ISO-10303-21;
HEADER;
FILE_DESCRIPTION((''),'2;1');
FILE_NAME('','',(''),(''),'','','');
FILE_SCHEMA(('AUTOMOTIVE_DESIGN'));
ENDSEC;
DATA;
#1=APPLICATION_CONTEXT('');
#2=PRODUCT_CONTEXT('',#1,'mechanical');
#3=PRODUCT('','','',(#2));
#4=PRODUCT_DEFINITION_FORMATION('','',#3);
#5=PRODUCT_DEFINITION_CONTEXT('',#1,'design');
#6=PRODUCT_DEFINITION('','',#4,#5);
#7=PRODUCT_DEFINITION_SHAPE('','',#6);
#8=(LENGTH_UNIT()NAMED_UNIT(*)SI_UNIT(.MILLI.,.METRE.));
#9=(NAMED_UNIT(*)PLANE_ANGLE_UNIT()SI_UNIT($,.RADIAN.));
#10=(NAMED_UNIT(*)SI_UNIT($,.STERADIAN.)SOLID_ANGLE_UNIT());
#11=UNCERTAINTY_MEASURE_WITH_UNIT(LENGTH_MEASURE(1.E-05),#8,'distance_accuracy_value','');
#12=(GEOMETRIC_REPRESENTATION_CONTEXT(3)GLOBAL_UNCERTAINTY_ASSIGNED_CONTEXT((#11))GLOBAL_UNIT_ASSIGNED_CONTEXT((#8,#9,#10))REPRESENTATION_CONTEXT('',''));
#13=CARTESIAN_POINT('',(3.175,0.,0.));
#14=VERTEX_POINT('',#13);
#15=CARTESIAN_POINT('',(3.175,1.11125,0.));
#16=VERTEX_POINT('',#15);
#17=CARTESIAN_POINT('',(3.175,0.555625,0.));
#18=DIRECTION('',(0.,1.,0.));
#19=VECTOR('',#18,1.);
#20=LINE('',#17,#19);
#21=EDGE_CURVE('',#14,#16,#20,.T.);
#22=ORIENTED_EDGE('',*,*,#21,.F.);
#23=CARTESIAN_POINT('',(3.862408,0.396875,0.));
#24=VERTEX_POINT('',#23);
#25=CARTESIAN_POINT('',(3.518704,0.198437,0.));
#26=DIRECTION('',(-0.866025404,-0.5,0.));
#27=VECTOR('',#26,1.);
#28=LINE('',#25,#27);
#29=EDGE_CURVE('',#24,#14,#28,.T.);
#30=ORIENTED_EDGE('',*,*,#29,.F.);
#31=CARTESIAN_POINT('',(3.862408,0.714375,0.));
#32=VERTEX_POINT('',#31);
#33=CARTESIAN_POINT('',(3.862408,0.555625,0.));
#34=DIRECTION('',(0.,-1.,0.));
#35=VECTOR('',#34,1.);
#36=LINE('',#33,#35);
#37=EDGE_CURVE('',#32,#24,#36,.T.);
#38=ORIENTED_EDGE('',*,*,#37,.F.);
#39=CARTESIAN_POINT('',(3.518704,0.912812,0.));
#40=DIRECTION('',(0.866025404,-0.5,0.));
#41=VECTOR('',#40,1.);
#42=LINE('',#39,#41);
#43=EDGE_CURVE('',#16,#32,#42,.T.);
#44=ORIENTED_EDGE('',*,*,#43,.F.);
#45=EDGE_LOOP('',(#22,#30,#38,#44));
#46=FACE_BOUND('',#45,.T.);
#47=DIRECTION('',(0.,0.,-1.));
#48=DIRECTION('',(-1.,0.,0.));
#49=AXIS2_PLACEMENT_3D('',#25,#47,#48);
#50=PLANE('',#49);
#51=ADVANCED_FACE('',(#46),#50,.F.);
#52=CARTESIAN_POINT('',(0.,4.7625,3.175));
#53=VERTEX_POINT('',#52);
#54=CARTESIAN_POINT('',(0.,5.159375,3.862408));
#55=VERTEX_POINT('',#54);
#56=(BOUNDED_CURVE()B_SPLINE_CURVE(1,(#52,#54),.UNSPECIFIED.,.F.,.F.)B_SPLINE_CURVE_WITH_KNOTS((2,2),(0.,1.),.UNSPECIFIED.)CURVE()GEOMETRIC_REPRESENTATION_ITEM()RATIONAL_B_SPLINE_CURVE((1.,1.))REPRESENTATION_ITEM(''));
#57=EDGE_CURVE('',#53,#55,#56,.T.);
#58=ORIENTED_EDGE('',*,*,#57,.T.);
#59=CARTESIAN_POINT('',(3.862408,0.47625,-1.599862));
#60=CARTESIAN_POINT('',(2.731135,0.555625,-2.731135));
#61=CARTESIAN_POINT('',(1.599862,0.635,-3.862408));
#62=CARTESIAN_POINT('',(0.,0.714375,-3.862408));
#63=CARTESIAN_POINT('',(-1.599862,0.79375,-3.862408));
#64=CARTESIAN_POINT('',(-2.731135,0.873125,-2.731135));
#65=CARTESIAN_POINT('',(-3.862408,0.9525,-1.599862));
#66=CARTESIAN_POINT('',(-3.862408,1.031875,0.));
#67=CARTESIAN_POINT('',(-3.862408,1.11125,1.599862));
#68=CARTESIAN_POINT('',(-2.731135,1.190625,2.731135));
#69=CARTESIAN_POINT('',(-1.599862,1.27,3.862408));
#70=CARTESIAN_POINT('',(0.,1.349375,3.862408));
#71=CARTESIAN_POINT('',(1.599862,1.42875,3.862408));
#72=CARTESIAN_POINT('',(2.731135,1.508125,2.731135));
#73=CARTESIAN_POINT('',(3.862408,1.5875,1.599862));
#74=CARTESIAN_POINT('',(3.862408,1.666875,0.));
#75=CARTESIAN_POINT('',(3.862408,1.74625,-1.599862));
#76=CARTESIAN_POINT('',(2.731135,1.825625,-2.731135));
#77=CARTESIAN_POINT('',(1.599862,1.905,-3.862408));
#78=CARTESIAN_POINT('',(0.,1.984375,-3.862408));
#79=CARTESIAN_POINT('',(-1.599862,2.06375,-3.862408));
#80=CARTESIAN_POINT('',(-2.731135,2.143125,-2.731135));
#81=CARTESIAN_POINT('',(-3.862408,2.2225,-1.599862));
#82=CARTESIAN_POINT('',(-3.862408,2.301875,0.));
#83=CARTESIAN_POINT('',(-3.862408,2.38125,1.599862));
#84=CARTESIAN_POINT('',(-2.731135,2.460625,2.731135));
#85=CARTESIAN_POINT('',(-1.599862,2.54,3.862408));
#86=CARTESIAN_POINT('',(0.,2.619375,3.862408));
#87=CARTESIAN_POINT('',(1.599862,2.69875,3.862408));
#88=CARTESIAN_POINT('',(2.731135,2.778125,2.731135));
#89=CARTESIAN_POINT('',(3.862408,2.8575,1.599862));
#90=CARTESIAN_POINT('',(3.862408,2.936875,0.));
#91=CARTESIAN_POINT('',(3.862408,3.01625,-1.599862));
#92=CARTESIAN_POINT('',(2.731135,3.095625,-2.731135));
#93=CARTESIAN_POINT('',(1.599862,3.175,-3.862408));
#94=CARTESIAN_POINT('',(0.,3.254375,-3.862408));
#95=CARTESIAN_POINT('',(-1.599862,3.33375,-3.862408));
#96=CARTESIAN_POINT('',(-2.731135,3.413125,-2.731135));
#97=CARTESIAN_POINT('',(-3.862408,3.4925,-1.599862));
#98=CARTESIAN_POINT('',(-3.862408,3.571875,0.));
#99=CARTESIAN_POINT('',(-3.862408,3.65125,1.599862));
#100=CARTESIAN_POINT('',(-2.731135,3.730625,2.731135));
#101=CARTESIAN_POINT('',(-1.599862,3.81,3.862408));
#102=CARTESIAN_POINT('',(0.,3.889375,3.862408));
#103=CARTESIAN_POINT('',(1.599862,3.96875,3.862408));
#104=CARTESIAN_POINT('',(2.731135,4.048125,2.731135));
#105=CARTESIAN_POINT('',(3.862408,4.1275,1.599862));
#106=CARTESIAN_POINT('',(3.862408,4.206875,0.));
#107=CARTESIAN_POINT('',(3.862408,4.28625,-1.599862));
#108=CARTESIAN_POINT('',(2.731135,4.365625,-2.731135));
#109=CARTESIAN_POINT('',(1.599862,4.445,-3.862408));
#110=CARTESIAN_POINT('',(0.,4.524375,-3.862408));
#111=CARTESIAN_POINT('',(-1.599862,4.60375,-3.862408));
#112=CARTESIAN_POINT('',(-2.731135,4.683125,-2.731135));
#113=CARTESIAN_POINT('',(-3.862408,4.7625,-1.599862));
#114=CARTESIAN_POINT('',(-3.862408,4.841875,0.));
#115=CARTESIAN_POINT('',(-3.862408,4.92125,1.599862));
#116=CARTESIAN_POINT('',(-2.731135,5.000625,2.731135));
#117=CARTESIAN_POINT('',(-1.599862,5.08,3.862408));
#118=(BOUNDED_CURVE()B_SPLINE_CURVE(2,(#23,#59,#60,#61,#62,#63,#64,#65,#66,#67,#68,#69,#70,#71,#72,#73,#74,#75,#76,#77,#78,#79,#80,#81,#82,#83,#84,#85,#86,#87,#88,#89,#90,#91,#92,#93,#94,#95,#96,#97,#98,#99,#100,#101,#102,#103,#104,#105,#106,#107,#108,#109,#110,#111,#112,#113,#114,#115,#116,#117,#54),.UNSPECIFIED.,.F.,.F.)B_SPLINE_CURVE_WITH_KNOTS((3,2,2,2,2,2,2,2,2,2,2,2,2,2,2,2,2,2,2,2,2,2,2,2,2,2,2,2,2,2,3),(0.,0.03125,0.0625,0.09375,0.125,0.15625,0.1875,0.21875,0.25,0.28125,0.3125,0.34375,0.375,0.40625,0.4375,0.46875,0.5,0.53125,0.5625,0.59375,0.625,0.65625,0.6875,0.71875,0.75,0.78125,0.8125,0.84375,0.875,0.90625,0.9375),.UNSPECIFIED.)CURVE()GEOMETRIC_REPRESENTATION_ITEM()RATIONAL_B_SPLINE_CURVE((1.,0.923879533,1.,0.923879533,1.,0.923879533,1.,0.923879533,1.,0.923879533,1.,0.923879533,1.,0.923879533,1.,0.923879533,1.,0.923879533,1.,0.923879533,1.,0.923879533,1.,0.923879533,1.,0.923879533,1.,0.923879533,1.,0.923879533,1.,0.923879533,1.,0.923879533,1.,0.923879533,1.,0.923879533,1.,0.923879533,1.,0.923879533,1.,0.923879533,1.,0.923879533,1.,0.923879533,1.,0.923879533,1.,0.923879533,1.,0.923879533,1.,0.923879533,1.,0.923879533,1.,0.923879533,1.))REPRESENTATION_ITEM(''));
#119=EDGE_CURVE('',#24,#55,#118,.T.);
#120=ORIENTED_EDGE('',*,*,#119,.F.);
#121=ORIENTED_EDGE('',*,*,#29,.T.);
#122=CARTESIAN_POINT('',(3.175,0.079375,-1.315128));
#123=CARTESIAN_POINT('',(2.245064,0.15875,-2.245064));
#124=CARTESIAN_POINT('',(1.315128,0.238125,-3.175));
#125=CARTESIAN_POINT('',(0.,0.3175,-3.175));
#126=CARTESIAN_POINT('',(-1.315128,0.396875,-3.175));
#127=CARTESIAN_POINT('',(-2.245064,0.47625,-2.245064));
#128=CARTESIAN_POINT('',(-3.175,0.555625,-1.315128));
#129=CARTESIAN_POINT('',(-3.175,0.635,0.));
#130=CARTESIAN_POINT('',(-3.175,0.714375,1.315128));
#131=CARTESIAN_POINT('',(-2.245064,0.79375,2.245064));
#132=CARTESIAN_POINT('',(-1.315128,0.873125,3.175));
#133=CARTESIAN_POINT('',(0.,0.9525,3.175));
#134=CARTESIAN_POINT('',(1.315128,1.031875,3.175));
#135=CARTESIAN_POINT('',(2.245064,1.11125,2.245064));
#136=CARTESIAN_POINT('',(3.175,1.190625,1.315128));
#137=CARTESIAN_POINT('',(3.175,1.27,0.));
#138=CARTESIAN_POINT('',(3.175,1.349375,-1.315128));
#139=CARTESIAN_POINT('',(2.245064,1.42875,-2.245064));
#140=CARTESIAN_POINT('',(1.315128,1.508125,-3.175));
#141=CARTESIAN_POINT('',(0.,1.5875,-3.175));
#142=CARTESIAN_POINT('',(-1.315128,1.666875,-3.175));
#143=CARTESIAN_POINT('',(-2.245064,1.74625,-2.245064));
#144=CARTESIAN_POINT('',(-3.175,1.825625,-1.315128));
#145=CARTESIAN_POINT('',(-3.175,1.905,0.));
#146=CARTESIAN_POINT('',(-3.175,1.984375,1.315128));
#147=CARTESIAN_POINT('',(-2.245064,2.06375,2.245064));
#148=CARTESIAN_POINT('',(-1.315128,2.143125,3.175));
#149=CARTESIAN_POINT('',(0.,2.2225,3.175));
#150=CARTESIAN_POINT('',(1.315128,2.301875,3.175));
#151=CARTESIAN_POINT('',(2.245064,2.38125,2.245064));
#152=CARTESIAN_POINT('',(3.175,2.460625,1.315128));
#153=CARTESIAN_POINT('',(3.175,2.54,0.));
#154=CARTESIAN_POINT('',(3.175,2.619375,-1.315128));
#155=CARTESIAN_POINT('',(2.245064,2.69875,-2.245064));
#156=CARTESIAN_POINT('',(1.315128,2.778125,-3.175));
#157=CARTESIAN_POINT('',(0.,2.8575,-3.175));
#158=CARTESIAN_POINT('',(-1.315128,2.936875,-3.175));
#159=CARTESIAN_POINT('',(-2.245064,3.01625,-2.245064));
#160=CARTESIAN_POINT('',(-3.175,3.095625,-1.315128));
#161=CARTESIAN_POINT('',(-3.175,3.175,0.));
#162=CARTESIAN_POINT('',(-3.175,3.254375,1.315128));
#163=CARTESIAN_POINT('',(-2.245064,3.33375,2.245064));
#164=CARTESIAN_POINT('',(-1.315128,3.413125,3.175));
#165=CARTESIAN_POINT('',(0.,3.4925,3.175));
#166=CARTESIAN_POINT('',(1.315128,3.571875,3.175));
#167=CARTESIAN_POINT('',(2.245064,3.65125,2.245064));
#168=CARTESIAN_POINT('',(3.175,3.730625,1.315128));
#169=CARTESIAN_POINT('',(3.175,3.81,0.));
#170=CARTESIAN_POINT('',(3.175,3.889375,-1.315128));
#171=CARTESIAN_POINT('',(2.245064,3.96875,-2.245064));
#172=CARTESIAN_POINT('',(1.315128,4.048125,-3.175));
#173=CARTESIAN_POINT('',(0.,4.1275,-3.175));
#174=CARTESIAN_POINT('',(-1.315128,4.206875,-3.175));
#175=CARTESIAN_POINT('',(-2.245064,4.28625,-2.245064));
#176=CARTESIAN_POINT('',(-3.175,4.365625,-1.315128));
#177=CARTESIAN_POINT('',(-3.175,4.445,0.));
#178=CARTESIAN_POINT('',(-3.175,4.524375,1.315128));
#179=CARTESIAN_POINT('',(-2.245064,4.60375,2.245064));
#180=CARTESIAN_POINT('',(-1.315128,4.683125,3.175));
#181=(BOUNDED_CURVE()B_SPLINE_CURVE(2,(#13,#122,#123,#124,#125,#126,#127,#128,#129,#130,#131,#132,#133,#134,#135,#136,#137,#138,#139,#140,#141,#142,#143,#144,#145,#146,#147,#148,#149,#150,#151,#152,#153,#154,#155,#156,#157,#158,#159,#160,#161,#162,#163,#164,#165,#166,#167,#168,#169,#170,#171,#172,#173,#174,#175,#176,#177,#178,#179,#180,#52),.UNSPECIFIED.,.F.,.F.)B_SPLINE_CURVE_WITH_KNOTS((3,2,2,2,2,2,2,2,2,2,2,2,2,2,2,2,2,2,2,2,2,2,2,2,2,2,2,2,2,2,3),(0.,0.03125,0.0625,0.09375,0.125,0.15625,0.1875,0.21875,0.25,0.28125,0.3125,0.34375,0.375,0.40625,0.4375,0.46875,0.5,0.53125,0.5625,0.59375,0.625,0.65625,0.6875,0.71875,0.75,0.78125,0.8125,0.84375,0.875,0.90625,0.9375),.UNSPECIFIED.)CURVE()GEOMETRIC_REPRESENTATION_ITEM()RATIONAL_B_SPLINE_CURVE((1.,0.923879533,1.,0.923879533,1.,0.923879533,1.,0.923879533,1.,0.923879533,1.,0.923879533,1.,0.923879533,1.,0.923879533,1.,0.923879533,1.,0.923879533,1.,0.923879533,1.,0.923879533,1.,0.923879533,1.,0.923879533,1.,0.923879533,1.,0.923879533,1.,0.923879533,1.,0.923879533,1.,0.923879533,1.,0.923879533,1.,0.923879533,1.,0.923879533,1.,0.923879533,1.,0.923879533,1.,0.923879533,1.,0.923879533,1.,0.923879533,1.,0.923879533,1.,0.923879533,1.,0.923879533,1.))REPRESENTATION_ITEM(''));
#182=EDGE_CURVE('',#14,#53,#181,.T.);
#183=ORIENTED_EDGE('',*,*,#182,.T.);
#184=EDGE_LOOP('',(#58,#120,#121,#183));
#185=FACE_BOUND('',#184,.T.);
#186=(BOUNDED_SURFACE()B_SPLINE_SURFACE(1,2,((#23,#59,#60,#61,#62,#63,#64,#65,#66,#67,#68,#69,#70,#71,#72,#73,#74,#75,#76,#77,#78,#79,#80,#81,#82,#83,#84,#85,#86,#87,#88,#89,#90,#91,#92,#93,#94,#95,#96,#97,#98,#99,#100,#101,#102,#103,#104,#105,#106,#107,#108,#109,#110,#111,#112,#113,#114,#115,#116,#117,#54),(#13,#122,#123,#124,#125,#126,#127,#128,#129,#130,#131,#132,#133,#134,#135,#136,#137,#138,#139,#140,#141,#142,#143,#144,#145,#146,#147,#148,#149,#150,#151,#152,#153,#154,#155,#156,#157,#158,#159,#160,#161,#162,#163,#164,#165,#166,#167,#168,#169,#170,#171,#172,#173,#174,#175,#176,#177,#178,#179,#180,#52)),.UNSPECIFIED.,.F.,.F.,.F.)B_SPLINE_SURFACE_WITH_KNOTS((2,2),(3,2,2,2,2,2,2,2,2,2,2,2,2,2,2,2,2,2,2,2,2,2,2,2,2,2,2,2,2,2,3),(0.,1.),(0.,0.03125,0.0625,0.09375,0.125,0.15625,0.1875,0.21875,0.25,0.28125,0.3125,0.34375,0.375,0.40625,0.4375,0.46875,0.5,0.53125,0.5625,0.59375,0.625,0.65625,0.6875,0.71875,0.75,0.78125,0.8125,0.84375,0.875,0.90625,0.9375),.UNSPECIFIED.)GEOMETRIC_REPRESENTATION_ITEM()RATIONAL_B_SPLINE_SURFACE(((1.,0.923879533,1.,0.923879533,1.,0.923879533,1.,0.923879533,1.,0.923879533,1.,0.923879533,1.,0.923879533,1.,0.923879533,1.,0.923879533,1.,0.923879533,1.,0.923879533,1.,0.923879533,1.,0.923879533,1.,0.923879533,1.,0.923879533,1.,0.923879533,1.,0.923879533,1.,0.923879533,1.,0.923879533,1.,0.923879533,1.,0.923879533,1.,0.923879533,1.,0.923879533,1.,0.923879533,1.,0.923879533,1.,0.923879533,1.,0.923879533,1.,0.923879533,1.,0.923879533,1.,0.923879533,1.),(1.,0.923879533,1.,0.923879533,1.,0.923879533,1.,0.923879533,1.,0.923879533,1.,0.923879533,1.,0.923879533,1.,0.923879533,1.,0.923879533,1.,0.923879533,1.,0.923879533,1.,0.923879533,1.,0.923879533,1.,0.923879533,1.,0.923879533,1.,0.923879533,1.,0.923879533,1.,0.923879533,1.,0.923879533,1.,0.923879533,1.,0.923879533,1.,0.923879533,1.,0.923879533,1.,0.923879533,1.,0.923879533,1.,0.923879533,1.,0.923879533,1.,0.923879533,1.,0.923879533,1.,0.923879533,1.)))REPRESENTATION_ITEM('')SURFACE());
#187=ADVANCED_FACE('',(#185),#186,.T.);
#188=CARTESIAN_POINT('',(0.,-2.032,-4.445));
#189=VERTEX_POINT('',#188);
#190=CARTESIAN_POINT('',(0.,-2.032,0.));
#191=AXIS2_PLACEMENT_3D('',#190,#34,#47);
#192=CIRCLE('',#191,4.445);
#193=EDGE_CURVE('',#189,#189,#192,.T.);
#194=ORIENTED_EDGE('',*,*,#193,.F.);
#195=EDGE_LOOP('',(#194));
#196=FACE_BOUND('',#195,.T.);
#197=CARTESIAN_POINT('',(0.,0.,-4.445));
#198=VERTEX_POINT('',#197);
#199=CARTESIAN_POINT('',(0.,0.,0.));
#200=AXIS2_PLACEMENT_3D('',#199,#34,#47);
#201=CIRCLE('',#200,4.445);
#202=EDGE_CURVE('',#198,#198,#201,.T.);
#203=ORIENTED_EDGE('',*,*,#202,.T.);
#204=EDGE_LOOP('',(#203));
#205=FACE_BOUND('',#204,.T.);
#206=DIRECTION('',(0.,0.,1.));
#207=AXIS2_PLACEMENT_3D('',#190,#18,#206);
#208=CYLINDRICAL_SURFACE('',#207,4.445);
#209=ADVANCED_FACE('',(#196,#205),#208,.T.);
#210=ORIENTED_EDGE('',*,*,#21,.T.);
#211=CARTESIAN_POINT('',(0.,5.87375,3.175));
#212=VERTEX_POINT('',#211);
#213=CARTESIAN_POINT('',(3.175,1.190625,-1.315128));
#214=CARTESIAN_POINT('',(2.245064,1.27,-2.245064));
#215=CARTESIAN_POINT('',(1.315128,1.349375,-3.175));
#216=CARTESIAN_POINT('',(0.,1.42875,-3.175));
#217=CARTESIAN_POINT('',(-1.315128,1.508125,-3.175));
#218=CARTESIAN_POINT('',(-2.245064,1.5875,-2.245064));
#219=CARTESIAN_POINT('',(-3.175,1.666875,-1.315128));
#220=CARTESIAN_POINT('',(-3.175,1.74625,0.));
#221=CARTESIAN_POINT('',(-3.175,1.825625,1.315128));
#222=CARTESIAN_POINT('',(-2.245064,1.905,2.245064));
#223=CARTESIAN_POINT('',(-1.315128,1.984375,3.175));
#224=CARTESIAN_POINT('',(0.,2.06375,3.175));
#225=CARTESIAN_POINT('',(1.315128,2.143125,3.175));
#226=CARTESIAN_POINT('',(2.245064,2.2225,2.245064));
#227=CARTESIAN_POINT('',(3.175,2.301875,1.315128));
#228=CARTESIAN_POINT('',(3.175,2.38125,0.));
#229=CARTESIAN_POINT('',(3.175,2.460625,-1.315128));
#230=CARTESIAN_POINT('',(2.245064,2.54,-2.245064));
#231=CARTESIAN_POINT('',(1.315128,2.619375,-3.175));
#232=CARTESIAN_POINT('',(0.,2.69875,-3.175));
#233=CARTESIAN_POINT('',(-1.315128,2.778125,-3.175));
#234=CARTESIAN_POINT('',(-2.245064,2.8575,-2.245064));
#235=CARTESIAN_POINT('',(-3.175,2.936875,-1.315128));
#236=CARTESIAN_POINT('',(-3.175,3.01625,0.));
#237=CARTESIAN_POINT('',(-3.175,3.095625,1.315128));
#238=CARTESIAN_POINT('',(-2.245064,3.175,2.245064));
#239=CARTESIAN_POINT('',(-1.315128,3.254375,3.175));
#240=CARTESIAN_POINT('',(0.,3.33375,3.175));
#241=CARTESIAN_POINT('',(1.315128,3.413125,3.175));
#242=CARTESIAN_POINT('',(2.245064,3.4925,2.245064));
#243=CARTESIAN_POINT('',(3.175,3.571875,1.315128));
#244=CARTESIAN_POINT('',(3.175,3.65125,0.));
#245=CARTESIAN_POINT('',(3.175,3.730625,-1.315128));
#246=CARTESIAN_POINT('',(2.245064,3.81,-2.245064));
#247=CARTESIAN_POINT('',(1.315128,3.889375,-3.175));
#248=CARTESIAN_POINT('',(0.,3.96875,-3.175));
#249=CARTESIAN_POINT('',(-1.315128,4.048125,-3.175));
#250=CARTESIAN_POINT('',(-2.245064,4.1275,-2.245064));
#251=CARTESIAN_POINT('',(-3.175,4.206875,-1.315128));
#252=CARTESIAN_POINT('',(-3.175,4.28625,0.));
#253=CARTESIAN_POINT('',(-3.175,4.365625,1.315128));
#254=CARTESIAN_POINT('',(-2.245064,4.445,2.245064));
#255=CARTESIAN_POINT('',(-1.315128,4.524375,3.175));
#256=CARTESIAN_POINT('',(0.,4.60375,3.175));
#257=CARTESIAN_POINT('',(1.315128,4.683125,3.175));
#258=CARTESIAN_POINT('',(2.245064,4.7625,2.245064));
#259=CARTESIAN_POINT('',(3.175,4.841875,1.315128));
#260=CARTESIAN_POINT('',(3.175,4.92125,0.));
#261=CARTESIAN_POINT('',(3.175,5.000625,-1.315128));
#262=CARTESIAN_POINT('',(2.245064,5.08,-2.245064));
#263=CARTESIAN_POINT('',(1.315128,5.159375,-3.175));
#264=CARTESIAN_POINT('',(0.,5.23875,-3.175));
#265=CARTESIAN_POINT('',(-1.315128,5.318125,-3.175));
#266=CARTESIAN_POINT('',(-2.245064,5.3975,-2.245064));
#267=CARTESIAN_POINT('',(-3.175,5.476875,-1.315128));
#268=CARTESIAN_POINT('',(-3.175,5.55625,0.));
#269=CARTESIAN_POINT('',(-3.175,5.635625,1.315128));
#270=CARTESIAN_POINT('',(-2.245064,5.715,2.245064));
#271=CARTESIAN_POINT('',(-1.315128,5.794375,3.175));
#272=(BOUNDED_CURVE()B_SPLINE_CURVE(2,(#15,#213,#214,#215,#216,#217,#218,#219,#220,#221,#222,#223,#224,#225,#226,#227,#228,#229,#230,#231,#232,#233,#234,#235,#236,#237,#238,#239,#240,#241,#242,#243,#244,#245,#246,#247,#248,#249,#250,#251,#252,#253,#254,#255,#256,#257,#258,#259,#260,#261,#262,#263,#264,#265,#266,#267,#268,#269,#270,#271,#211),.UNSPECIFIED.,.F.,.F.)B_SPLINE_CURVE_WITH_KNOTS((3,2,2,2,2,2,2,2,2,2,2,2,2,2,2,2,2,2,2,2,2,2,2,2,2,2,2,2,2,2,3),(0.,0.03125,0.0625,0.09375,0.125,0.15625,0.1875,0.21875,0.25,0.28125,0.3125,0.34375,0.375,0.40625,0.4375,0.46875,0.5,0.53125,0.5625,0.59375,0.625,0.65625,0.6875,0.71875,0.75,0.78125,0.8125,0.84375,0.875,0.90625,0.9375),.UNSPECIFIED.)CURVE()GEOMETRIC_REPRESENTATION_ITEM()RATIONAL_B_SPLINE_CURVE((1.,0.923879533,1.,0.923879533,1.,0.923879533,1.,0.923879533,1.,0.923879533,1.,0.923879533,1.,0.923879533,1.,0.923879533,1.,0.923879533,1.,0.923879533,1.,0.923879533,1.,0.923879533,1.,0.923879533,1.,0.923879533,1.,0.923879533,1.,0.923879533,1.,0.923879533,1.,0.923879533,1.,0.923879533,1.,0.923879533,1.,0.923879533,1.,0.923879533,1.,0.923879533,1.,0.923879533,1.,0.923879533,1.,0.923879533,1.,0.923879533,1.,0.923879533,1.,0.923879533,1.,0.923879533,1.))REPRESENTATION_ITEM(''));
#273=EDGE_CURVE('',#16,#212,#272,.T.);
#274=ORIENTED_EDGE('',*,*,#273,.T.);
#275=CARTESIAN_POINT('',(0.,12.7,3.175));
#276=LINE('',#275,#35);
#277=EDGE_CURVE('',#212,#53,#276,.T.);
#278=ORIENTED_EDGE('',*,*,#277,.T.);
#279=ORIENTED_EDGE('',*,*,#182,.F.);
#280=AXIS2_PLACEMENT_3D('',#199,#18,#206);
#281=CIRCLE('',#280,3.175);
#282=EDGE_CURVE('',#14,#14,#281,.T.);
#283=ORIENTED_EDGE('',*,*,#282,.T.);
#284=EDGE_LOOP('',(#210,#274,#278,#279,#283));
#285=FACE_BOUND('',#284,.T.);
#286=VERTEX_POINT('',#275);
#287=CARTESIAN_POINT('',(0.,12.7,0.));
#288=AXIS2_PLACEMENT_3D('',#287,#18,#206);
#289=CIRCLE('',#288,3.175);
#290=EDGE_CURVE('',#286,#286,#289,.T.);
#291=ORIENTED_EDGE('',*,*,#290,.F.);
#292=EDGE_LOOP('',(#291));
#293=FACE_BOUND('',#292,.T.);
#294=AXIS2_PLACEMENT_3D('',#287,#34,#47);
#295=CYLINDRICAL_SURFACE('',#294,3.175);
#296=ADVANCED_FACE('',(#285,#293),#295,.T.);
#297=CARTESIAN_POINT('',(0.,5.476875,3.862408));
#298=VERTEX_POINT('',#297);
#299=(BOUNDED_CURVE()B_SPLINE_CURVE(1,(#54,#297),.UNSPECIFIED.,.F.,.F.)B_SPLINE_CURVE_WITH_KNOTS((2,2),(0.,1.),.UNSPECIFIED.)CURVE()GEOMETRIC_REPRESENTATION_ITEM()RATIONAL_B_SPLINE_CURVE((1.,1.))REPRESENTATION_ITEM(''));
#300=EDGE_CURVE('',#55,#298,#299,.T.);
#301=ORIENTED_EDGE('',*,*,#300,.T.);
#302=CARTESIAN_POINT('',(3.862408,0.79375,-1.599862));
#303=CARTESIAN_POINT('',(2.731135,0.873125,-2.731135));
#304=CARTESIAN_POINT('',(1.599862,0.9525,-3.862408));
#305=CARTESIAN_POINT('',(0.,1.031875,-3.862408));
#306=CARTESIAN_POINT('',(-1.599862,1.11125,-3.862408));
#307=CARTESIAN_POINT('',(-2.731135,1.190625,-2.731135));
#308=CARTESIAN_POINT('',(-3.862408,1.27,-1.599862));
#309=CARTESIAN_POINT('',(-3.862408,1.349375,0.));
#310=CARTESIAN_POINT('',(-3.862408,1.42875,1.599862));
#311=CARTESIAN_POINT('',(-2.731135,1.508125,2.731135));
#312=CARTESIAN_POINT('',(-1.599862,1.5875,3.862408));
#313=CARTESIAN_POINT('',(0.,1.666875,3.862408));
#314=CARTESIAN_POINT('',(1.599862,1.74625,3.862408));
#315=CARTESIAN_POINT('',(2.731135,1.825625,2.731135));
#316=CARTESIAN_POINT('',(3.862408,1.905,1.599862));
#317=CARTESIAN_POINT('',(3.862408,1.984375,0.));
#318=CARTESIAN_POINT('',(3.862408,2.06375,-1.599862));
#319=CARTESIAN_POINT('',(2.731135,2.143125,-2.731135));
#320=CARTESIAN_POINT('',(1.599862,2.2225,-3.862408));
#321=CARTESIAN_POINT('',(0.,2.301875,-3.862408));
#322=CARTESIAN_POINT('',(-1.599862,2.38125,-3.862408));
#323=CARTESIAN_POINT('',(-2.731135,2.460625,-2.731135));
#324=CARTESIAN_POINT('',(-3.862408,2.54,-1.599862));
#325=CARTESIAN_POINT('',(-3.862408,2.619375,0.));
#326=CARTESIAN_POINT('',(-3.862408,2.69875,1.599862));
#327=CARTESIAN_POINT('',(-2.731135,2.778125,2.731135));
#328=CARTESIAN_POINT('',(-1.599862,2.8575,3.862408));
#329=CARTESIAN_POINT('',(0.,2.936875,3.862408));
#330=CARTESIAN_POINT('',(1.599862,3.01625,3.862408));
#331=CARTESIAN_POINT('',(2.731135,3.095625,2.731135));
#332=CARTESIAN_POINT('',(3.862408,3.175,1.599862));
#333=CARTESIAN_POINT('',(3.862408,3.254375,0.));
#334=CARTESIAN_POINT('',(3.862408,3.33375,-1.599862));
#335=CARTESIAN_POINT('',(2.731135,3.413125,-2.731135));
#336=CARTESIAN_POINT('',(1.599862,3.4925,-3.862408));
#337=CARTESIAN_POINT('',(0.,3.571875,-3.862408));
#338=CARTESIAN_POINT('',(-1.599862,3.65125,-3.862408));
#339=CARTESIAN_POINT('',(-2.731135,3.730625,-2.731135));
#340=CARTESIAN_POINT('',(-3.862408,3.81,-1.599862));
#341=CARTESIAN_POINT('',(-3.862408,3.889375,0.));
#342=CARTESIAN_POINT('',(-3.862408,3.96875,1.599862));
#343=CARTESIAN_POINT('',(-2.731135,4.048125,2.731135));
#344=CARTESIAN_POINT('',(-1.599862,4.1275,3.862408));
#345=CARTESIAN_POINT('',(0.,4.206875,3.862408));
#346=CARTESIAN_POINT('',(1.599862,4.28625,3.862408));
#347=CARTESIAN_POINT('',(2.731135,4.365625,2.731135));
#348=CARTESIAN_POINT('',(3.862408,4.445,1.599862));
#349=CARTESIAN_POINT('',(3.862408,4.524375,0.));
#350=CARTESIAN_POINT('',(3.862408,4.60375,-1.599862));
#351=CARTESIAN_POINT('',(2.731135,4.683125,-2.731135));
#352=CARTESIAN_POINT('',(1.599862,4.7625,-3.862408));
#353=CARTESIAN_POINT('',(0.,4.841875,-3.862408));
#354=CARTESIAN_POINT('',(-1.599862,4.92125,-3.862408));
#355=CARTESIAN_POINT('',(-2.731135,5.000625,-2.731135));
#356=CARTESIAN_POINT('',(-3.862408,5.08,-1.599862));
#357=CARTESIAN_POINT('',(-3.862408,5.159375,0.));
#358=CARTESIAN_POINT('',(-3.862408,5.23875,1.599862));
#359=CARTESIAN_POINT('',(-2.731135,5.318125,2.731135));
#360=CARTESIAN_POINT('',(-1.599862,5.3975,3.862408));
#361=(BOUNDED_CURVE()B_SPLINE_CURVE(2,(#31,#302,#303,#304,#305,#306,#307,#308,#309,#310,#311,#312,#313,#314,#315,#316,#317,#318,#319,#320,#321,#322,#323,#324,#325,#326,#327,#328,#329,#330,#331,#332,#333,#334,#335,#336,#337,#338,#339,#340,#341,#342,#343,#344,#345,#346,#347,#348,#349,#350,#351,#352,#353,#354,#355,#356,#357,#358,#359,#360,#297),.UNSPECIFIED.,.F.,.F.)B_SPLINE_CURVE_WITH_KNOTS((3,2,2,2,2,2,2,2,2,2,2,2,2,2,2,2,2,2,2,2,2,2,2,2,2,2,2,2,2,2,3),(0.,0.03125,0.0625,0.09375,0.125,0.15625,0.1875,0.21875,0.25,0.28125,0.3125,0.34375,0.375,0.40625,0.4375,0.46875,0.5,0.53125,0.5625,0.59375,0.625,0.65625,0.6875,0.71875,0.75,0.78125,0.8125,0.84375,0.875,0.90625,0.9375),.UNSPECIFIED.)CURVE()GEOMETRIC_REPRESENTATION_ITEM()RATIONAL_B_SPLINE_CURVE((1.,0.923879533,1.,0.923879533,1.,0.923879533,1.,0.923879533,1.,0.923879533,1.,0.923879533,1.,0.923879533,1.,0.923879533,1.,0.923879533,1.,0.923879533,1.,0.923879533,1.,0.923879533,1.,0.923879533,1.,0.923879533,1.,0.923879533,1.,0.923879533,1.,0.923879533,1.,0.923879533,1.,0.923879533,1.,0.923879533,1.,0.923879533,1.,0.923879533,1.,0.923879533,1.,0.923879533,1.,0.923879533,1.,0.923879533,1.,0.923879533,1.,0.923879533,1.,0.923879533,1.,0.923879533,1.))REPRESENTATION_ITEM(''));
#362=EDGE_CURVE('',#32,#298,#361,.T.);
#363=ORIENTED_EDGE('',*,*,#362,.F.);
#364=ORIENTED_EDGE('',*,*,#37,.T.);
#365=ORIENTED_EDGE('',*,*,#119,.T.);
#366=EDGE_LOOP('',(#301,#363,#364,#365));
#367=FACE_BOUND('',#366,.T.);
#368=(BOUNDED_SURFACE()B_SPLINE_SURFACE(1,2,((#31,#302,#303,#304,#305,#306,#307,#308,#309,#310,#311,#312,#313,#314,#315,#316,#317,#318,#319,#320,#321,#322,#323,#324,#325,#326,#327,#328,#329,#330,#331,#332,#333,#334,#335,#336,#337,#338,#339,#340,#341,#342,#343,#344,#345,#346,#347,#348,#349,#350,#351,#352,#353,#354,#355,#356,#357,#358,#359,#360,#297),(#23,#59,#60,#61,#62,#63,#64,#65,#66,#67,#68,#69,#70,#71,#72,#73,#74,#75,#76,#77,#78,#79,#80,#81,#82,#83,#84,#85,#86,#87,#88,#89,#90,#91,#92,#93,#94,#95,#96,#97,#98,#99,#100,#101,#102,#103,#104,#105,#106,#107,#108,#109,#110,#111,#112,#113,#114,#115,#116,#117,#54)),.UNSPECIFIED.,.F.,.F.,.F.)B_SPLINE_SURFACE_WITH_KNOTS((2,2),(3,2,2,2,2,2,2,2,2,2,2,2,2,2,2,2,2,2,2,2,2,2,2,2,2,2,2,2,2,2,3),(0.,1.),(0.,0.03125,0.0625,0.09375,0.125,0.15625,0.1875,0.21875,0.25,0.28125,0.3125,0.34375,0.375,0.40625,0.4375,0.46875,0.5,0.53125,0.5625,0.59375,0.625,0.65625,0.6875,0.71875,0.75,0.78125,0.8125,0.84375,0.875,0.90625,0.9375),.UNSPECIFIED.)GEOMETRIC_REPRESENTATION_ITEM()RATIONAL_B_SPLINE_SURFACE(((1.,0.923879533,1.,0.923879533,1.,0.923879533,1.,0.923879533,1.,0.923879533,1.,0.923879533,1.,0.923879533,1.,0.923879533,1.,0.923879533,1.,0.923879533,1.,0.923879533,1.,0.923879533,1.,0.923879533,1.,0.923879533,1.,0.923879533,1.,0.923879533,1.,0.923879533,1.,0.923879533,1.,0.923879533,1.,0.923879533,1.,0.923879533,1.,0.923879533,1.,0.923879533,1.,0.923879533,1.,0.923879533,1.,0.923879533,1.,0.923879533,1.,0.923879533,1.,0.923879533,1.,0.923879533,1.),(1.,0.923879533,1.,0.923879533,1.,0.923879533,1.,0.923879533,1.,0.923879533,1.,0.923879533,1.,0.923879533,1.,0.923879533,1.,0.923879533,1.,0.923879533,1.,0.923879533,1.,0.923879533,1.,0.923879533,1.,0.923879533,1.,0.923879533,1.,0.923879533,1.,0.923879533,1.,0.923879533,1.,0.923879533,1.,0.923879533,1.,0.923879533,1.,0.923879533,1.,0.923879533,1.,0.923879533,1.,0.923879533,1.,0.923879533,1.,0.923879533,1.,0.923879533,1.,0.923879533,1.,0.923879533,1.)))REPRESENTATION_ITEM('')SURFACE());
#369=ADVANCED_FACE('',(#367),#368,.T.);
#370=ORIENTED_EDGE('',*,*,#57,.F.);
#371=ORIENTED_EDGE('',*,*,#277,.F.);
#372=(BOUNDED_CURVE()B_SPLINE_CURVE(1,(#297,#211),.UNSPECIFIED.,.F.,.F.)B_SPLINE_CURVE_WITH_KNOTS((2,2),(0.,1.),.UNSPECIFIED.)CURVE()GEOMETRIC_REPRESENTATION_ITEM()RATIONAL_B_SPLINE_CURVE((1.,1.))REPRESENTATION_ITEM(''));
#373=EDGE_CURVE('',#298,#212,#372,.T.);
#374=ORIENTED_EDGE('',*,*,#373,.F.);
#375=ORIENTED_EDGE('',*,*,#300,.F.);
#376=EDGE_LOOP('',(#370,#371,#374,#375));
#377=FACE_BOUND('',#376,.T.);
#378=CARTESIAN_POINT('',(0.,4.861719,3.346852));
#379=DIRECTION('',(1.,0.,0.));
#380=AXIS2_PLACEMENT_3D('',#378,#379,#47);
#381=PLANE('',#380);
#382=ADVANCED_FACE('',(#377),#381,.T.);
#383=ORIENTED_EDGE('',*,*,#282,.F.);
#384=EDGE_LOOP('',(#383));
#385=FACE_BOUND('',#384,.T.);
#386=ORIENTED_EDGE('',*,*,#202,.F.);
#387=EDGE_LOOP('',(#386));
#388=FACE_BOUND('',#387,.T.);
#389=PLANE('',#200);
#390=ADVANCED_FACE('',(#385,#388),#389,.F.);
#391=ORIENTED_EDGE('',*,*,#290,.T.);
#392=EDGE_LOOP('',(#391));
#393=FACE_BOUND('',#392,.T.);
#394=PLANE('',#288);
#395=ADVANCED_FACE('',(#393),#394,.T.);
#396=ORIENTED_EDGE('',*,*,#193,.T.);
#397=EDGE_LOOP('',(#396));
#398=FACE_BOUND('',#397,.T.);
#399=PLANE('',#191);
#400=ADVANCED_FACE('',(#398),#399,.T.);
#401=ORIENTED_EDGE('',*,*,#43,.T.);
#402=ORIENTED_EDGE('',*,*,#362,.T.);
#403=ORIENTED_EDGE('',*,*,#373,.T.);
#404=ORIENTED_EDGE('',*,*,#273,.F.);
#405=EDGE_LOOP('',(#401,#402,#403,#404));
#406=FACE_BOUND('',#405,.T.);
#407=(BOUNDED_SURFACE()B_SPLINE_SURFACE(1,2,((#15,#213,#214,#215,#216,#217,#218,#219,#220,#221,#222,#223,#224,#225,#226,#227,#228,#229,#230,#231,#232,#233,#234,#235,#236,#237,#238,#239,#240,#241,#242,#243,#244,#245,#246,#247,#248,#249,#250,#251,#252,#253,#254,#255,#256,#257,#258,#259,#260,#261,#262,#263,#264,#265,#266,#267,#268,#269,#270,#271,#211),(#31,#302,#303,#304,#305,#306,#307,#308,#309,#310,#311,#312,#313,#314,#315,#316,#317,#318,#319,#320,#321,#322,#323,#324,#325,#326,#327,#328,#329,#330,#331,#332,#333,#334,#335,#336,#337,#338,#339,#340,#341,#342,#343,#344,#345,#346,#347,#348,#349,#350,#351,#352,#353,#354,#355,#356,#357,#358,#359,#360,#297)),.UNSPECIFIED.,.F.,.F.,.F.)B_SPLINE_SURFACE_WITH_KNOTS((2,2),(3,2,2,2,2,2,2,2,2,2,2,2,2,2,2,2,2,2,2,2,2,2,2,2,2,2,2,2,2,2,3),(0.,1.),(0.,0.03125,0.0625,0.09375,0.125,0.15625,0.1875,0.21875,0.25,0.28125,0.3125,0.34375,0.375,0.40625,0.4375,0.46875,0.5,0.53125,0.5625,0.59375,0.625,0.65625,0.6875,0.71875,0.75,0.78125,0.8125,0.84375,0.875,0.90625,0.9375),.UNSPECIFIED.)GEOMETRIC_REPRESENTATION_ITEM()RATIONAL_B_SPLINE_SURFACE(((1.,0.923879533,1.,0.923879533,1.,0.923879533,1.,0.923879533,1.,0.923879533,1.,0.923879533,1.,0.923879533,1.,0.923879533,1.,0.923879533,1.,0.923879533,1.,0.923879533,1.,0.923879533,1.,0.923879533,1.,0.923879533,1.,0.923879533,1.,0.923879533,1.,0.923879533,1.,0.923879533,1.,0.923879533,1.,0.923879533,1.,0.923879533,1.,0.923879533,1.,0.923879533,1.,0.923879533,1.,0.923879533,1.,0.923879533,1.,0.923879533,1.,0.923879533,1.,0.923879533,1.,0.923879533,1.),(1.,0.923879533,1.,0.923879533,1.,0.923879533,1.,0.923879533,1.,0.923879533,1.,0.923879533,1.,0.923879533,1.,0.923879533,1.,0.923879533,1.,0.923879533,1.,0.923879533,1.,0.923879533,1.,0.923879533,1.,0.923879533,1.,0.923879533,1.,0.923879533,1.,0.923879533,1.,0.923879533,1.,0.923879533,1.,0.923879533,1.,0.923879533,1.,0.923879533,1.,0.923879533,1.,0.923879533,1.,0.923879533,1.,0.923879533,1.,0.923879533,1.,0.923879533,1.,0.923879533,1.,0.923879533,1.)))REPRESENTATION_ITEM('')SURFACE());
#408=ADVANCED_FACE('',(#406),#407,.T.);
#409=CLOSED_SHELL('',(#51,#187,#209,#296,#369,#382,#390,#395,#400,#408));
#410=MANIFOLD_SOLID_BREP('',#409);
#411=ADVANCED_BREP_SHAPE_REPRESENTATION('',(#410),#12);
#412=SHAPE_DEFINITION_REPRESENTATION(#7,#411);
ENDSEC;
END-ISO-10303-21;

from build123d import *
from build123d.topology import SkipClean

# Parameters (mm, degrees)
SKETCH2_R           = 3.175
BOSS_EXTRUDE1_DEPTH = 12.7
SKETCH3_R           = 4.445
BOSS_EXTRUDE2_DEPTH = 2.032
THREAD1_PITCH       = 1.27


with BuildPart() as part:
    # Sketch2 → Boss-Extrude1 (new body)
    with BuildSketch(Plane(origin=(0, 0, 0), x_dir=(1, 0, 0), z_dir=(0, 1, 0))):
        with Locations(Location((0, 0, 0), (0, 0, 270))):
            Circle(SKETCH2_R)
    extrude(amount=BOSS_EXTRUDE1_DEPTH)

    # Sketch3 → Boss-Extrude2 (add)
    with BuildSketch(Plane(origin=(0, 0, 0), x_dir=(-1, 0, 0), z_dir=(0, -1, 0))):
        with Locations(Location((0, 0, 0), (0, 0, 90))):
            Circle(SKETCH3_R)
    extrude(amount=BOSS_EXTRUDE2_DEPTH)

    # Thread1: the profile of Thread Profile1 profile screwed along a right-hand helix of 3.75 turns, 8 arcs to a turn; built about Z, then put on its axis
    with SkipClean():  # the faces are left unmerged after this step: merging them gives an invalid solid
        thread1_z = Axis((0, 0, 0), (0, 0, 1))
        thread1_corners = [(3.1747, 0, -0.000173205), (3.1747, 0, 1.111423202), (3.862407661, 0, 0.714374998), (3.862407661, 0, 0.396874998)]
        with BuildLine(mode=Mode.PRIVATE) as thread1_profile:
            Line(thread1_corners[0], thread1_corners[1])
            Line(thread1_corners[1], thread1_corners[2])
            Line(thread1_corners[2], thread1_corners[3])
            Line(thread1_corners[3], thread1_corners[0])
        thread1_cap = Face(thread1_profile.wire())
        thread1_turn_angles = [0, 22.5, 45, 67.5, 90, 112.5, 135, 157.5, 180, 202.5, 225, 247.5, 270, 292.5, 315, 337.5, 360]
        thread1_turn_weights = [1, 0.9238795325112867, 1, 0.9238795325112867, 1, 0.9238795325112867, 1, 0.9238795325112867, 1, 0.9238795325112867, 1, 0.9238795325112867, 1, 0.9238795325112867, 1, 0.9238795325112867, 1]
        thread1_turn_rails = [Edge.make_bspline([Vector(p[0], p[1], 0).rotate(thread1_z, thread1_turn_angles[k]) / thread1_turn_weights[k] + Vector(0, 0, p[2] + THREAD1_PITCH * thread1_turn_angles[k] / 360) for k in range(17)], [0, 0, 0, 1, 1, 2, 2, 3, 3, 4, 4, 5, 5, 6, 6, 7, 7, 8, 8, 8], 2, thread1_turn_weights) for p in thread1_corners]
        thread1_turn_sides = [Face.make_surface_from_curves(thread1_turn_rails[p[0]], thread1_turn_rails[p[1]]) for p in [(0, 1), (1, 2), (2, 3), (3, 0)]]
        thread1_last_angles = [1080, 1102.5, 1125, 1147.5, 1170, 1192.5, 1215, 1237.5, 1260, 1282.5, 1305, 1327.5, 1350]
        thread1_last_weights = [1, 0.9238795325112867, 1, 0.9238795325112867, 1, 0.9238795325112867, 1, 0.9238795325112867, 1, 0.9238795325112867, 1, 0.9238795325112867, 1]
        thread1_last_rails = [Edge.make_bspline([Vector(p[0], p[1], 0).rotate(thread1_z, thread1_last_angles[k]) / thread1_last_weights[k] + Vector(0, 0, p[2] + THREAD1_PITCH * thread1_last_angles[k] / 360) for k in range(13)], [0, 0, 0, 1, 1, 2, 2, 3, 3, 4, 4, 5, 5, 6, 6, 6], 2, thread1_last_weights) for p in thread1_corners]
        thread1_last_sides = [Face.make_surface_from_curves(thread1_last_rails[p[0]], thread1_last_rails[p[1]]) for p in [(0, 1), (1, 2), (2, 3), (3, 0)]]
        thread1 = Plane(origin=(0, 0, 0), x_dir=(1, 0, 0), z_dir=(0, 1, 0)) * Solid(Shell([*[p.moved(Location((0, 0, THREAD1_PITCH * i))) for i in range(3) for p in thread1_turn_sides], *thread1_last_sides, thread1_cap, thread1_cap.rotate(thread1_z, 1350).moved(Location((0, 0, THREAD1_PITCH * 1350 / 360)))]))
        add(thread1)


solid = part.part
